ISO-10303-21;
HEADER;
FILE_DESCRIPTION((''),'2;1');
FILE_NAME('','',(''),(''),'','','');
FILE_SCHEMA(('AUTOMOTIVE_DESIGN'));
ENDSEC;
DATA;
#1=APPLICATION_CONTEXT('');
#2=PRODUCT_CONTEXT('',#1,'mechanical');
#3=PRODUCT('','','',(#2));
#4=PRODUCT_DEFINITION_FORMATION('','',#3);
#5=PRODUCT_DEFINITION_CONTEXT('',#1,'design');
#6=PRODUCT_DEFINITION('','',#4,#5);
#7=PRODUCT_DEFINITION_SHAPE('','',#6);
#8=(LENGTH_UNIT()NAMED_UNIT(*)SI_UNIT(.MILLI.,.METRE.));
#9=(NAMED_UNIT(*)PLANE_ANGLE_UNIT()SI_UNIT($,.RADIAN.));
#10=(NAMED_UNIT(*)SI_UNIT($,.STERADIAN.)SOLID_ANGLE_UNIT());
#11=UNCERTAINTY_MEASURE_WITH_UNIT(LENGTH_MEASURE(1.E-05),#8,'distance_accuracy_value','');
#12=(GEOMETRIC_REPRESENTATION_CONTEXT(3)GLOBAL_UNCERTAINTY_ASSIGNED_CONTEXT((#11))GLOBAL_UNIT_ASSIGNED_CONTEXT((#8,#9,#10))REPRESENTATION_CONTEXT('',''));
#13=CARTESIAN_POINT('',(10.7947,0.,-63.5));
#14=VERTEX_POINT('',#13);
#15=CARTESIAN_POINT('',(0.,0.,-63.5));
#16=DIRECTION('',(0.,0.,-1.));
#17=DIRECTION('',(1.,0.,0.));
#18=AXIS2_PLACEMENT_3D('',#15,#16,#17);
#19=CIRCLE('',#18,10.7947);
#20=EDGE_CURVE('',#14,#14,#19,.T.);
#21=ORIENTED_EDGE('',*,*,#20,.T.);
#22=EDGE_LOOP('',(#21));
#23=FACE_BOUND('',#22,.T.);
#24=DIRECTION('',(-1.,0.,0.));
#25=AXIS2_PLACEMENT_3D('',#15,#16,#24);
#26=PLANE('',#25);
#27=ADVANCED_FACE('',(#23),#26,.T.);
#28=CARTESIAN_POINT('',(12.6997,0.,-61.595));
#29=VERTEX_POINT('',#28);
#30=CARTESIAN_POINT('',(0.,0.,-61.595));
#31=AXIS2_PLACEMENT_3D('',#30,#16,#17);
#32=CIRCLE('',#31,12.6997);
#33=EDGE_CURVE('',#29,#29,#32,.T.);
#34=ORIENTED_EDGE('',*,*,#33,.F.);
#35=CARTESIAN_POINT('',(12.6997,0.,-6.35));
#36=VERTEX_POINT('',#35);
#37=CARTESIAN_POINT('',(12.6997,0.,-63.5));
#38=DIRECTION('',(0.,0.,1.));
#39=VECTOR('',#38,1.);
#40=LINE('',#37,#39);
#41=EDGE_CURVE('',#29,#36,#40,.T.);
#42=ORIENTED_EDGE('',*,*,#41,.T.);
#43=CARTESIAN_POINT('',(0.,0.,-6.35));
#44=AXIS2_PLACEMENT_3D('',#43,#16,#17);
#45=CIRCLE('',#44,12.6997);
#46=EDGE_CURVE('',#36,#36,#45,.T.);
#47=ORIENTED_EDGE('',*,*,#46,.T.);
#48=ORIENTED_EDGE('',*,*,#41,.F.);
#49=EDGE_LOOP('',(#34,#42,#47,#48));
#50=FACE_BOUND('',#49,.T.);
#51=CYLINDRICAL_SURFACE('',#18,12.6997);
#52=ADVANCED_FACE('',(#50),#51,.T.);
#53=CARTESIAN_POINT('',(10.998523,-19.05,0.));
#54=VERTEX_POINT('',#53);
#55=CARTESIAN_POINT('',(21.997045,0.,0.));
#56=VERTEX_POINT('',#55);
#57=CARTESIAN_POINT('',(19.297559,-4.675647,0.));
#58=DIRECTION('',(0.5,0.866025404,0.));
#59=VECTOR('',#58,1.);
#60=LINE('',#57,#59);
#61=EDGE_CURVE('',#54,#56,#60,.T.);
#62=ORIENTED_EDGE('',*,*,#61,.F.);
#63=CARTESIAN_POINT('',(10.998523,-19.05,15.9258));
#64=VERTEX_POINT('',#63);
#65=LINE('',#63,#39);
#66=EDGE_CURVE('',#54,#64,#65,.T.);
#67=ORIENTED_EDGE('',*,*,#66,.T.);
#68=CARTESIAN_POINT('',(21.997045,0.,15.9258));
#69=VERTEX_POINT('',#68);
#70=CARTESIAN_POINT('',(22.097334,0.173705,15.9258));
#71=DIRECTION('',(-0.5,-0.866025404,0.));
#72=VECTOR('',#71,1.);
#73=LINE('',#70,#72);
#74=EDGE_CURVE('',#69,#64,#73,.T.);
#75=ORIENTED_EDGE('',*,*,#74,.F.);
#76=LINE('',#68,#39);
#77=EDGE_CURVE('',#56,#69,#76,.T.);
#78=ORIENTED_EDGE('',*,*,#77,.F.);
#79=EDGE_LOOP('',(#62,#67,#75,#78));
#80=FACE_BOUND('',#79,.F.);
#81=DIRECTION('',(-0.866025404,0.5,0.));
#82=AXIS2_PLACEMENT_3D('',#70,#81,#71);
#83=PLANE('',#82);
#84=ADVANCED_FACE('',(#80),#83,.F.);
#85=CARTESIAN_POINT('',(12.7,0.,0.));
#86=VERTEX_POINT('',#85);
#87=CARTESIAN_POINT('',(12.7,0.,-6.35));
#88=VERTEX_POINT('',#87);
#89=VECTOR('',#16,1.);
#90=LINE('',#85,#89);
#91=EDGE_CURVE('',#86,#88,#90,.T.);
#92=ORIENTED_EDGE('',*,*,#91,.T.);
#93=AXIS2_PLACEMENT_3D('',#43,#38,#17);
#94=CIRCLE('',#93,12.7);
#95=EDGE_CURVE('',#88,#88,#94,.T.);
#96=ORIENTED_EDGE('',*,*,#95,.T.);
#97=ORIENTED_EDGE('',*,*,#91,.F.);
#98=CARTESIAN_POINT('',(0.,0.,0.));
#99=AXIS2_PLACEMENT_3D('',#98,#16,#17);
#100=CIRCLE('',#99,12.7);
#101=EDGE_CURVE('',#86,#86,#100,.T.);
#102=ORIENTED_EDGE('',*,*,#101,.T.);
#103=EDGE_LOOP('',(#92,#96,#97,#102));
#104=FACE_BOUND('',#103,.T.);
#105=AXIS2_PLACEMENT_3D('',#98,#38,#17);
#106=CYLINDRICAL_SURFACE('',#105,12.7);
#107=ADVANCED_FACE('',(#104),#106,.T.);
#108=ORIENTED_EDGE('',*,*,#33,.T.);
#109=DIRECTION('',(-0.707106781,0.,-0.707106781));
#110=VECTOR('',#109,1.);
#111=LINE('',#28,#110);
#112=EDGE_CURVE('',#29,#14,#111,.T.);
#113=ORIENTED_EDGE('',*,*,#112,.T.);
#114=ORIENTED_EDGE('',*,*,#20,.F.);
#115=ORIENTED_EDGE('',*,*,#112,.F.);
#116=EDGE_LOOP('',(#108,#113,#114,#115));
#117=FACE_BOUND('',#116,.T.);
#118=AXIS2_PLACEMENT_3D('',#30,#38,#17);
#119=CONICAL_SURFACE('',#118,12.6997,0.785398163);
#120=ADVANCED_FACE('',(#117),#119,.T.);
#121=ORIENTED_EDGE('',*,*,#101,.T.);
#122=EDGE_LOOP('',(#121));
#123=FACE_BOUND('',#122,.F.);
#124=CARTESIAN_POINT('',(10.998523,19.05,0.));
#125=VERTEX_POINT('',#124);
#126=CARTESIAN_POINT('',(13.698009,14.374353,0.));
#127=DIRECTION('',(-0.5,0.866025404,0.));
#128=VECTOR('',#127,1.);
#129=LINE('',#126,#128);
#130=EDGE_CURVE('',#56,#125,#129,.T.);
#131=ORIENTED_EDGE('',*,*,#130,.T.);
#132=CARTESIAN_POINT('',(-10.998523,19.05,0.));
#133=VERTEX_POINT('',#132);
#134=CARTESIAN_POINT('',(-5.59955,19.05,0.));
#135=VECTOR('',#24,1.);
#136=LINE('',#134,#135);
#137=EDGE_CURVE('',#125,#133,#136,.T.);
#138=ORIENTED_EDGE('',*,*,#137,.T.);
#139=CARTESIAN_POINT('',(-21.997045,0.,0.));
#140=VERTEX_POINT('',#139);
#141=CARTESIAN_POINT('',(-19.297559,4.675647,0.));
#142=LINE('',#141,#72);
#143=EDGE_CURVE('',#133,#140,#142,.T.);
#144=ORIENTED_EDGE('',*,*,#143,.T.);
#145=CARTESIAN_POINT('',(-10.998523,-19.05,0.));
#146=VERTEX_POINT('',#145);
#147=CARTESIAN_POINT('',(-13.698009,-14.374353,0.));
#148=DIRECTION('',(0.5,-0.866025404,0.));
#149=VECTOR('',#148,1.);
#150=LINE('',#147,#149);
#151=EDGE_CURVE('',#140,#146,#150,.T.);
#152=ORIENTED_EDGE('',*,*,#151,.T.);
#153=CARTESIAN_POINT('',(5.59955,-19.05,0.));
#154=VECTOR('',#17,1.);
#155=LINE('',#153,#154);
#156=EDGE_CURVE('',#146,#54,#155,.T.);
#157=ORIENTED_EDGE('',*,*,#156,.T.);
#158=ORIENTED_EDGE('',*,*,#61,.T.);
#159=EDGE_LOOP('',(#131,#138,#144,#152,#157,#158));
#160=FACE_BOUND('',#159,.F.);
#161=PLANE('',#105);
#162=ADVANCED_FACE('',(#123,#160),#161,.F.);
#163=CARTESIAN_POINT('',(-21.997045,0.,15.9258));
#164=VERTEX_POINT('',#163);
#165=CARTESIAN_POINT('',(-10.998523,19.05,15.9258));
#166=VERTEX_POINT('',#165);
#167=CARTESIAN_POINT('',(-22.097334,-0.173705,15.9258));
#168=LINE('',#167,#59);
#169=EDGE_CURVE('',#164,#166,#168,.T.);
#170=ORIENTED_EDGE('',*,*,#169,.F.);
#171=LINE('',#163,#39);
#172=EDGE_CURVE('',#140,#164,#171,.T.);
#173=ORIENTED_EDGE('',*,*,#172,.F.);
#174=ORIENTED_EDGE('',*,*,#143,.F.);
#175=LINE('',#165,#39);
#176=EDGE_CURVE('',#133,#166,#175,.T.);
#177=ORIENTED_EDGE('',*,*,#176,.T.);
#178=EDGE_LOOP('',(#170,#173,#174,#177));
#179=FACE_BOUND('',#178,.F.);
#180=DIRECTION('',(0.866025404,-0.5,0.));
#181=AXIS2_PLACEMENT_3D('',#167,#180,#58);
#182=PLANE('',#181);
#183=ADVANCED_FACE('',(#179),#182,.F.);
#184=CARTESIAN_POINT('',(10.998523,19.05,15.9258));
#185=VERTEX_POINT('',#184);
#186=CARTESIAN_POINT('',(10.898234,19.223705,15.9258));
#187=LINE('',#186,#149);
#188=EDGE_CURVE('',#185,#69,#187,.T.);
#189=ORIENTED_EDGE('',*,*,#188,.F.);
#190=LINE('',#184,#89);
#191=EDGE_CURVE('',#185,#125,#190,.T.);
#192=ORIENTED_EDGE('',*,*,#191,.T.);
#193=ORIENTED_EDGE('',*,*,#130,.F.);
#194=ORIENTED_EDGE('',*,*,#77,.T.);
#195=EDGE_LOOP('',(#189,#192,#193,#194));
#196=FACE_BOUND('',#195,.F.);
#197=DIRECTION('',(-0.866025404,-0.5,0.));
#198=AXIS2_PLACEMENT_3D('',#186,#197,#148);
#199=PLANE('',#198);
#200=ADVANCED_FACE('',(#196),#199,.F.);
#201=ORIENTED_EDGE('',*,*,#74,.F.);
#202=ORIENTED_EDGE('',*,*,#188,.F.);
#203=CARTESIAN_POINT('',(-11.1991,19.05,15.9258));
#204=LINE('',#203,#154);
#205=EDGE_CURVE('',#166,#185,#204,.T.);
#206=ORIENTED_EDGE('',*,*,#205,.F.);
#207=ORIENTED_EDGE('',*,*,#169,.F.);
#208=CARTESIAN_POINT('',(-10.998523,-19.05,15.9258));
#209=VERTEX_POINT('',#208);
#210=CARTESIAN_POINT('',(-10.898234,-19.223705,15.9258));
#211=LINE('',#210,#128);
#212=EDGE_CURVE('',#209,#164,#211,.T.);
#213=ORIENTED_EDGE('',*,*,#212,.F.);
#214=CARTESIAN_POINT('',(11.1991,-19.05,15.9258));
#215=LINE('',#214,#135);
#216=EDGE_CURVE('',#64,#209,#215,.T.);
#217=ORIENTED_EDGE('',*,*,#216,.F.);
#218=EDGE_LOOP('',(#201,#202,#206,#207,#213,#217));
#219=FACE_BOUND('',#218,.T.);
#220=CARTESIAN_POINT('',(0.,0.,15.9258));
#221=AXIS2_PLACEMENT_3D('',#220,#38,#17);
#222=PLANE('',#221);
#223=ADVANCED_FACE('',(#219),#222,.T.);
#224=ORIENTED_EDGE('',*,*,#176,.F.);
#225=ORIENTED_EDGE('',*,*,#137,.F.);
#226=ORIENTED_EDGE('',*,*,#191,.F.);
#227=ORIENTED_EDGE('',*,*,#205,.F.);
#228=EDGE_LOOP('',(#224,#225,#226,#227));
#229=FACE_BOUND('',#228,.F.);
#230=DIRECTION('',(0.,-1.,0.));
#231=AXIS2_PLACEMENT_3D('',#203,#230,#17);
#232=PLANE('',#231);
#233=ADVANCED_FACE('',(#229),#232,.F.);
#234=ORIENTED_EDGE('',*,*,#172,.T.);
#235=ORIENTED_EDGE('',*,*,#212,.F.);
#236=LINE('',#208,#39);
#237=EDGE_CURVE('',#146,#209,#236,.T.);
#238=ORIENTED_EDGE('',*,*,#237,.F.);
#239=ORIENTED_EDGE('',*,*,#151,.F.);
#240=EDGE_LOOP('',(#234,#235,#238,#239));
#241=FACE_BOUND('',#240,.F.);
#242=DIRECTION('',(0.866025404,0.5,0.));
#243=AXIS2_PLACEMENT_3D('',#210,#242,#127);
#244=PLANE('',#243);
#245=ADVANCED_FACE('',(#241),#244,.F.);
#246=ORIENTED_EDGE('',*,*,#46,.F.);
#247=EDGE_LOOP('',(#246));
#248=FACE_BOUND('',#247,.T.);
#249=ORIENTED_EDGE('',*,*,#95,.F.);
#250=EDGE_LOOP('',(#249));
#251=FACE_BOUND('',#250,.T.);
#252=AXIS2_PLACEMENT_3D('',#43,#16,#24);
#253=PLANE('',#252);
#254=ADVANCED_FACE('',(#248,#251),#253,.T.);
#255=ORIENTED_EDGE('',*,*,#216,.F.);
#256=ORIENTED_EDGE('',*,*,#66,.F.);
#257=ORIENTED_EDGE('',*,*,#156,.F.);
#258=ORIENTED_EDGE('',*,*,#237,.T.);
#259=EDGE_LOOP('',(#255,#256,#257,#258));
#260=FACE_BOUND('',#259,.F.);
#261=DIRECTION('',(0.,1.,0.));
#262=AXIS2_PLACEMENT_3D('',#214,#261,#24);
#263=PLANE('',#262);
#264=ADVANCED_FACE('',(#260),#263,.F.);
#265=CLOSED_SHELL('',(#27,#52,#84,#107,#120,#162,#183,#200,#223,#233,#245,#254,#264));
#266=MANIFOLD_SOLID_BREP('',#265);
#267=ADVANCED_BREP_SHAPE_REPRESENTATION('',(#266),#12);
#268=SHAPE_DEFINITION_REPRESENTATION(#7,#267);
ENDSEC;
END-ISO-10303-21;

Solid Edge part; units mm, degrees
sketch "Sketch1" plane through (0, 0, 0) normal (0, 0, 1) x (1, 0, 0)
  circle A0 centre (0, 0) radius 22.098
  dimension "D1" = 44.196
extrude "Protrusion1" add sketch "Sketch1" along normal blind 15.9258
sketch "Sketch2" plane through (0, 0, 0) normal (0, 0, -1) x (1, 0, 0)
  circle A0 centre (0, 0) radius 12.7
extrude "Protrusion2" add sketch "Sketch2" along normal blind 63.5
sketch "Sketch3" plane through (0, 0, -63.5) normal (0, 0, -1) x (1, 0, 0)
  circle A0 centre (0, 0) radius 12.6997
extrude "Cutout1" cut sketch "Sketch3" against normal blind 57.15 flip side to cut
chamfer "Chamfer_1" distance 1.905 angle 45 1 edges at (-12.6997, 0, -63.5)
sketch "Sketch4" plane through (0, 0, 15.9258) normal (0, 0, 1) x (1, 0, 0)
  line L0 (-11.1991, 19.05) -> (11.1991, 19.05)
  dimension "D1" = 38.1
extrude "Cutout2" cut sketch "Sketch4" against normal up to next material side at (0, 19.1, 15.9258)
pattern_circular "Pattern1" count 6 over 360 about axis through (0, 0, 15.9258) along (0, 0, 1) of "Cutout2"
properties part number "24107048"
